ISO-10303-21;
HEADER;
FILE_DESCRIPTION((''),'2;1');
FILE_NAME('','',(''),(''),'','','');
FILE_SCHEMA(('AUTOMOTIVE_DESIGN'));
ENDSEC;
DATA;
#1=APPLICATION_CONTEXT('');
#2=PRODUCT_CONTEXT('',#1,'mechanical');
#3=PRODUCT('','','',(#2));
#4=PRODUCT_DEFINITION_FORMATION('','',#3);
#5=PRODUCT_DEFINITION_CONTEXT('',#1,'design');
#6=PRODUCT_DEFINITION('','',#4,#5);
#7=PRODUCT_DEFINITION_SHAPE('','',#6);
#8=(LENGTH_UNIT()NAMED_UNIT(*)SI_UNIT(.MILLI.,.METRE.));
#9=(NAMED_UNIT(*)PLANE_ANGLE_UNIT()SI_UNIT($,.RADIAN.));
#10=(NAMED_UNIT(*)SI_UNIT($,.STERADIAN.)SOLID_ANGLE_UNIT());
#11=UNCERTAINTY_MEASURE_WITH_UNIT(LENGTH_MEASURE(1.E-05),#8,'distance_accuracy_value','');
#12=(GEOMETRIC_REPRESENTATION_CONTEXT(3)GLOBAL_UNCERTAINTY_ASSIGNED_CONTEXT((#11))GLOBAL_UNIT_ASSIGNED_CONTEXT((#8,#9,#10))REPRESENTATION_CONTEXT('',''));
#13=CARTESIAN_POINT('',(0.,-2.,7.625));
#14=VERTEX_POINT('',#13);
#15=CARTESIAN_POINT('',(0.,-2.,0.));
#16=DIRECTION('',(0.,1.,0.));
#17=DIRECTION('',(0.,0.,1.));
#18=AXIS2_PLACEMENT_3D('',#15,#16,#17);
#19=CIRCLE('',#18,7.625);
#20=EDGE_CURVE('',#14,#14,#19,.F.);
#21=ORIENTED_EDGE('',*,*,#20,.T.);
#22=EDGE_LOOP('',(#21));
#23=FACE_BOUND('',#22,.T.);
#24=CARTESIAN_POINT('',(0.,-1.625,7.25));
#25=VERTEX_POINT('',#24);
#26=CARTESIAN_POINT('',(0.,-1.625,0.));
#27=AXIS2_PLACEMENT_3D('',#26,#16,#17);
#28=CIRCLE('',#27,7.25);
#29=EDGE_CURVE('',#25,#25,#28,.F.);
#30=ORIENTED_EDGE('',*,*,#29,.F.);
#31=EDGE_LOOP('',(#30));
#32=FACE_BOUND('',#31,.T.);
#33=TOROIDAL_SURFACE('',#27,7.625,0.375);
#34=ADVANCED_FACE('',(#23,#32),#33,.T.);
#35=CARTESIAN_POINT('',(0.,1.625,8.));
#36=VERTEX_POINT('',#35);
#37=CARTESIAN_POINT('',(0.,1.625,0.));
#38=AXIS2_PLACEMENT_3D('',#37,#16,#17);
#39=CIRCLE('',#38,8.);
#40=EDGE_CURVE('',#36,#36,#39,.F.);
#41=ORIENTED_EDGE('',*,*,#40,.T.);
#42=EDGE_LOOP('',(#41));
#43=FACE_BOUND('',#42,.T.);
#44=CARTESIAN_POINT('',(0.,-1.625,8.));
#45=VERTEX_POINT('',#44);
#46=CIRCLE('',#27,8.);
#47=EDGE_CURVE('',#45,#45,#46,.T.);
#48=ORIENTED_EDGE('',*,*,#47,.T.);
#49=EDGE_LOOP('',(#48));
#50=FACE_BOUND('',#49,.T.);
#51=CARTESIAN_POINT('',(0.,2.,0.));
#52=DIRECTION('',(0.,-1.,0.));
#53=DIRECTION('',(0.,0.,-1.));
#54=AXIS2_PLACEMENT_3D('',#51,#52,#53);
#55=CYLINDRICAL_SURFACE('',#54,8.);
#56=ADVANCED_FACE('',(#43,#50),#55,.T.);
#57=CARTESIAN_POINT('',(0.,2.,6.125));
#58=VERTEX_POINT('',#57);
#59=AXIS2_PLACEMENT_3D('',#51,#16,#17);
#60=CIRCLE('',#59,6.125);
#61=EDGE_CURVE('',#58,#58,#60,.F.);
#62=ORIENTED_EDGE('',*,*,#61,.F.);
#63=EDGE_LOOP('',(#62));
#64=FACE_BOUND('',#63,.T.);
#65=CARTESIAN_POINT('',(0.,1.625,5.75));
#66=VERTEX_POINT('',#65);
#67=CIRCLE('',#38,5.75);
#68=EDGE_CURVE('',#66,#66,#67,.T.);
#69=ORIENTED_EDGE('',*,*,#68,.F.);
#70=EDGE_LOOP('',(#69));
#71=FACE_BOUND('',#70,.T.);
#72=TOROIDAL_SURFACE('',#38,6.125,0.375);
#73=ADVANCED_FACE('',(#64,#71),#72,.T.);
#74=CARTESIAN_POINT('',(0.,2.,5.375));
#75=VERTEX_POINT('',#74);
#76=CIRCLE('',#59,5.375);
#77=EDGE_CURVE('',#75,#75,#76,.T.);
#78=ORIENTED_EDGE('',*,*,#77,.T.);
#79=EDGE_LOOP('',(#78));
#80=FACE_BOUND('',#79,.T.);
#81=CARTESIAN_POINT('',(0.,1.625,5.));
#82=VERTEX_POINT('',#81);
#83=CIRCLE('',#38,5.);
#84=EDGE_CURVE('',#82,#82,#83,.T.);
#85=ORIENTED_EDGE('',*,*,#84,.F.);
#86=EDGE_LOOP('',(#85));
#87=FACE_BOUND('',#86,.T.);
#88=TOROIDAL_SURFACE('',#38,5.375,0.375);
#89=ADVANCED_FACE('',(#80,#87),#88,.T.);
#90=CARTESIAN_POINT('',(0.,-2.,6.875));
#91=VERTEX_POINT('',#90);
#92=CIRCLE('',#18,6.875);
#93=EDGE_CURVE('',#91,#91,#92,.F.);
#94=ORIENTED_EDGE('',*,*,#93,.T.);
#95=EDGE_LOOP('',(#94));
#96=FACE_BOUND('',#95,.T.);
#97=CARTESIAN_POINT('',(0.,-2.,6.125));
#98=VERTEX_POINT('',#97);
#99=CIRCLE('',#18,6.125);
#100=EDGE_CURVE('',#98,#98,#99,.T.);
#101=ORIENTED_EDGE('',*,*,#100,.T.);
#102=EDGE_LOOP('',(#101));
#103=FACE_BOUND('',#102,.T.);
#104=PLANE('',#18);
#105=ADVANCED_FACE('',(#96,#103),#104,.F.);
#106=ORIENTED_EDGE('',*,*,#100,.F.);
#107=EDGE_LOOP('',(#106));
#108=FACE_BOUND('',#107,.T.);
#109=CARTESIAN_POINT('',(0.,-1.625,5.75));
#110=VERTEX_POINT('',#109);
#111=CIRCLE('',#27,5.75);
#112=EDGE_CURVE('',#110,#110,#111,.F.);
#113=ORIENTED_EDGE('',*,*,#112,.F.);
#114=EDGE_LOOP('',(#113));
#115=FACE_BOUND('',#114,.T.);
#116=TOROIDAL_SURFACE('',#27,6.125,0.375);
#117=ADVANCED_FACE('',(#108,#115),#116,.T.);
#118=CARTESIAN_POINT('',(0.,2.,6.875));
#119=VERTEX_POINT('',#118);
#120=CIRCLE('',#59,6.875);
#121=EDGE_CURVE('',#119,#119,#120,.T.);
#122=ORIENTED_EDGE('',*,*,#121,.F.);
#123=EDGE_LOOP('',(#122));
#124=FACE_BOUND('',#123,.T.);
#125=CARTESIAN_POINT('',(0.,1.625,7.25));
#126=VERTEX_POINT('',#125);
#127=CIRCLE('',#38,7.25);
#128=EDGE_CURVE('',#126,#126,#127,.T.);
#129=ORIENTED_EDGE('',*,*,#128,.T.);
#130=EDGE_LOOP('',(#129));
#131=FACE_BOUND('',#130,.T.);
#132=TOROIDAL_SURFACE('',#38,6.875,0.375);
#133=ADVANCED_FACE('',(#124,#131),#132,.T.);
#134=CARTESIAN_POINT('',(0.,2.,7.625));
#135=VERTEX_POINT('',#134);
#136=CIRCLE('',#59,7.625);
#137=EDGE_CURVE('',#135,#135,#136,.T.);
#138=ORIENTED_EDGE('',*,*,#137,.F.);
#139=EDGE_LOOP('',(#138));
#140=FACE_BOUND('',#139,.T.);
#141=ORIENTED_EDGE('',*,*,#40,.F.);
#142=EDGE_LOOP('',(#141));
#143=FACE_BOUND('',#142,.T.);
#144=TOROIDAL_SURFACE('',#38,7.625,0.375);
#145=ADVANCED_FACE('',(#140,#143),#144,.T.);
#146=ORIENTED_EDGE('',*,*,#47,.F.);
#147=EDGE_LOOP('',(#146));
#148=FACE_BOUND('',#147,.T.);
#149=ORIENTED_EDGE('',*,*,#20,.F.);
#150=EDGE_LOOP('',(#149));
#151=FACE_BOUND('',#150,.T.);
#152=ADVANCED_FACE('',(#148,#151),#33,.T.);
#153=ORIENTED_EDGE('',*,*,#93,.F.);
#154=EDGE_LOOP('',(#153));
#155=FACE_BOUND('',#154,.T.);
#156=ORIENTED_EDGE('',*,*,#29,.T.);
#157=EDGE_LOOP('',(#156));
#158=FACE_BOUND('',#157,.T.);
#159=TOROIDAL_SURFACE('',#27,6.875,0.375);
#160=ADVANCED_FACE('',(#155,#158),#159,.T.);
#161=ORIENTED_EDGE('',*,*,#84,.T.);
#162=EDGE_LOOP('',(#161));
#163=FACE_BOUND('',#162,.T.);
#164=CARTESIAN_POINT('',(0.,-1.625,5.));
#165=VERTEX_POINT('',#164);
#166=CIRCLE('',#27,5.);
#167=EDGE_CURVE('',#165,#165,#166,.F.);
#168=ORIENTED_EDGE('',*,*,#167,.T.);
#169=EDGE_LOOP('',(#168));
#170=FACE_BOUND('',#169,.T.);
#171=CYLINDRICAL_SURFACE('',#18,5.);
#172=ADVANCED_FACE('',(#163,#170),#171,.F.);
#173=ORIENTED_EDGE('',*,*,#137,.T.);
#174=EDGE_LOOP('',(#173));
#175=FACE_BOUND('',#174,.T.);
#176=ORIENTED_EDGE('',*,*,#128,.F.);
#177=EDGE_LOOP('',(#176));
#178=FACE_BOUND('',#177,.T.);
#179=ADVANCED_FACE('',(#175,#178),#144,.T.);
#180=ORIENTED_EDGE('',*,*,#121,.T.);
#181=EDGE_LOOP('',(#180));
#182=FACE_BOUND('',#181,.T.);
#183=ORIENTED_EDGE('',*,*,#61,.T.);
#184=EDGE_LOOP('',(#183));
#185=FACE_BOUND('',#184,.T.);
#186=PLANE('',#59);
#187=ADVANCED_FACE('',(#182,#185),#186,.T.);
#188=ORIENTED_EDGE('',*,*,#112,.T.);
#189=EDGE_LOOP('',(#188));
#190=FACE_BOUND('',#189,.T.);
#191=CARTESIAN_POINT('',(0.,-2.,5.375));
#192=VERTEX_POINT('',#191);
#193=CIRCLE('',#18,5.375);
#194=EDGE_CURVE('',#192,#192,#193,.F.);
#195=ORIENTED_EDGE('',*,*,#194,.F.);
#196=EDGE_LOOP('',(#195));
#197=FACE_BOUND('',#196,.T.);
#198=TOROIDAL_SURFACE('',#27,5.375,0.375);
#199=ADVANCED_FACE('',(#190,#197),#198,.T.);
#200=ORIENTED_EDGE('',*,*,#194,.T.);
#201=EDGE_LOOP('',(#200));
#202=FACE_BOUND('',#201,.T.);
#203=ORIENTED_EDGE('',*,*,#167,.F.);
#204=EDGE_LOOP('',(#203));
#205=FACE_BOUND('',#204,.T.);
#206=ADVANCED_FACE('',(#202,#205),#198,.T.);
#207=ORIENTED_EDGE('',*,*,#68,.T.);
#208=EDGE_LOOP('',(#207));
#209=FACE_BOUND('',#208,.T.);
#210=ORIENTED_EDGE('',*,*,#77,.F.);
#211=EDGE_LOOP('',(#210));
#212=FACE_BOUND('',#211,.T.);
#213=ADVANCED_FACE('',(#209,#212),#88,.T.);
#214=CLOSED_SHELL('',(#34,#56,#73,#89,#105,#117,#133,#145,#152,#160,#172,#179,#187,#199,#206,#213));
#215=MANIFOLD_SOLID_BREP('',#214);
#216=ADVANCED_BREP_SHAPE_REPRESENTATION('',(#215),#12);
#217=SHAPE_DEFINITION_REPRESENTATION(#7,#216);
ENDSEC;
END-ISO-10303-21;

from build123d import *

# Parameters (mm, degrees)
SKETCH1_R                = 8
BOSS_EXTRUDE1_DEPTH      = 2
FILLET1_R                = 0.375
CUT_EXTRUDE1_DEPTH       = 12.489125432
CUT_EXTRUDE1_DEPTH_BACK  = 12.489125432
SKETCH2_R                = 7.25
FILLET2_R                = 0.375
BOSS_EXTRUDE2_DEPTH      = 2
BOSS_EXTRUDE2_DEPTH_BACK = 2
SKETCH3_R                = 7.25
FILLET3_R                = 0.375
CUT_EXTRUDE2_DEPTH       = 12.489125432
CUT_EXTRUDE2_DEPTH_BACK  = 12.489125432
SKETCH4_R                = 5.75
FILLET4_R                = 0.375
BOSS_EXTRUDE3_DEPTH      = 2
BOSS_EXTRUDE3_DEPTH_BACK = 2
SKETCH5_R                = 5.75
FILLET5_R                = 0.375
CUT_EXTRUDE3_DEPTH       = 12.489125432
CUT_EXTRUDE3_DEPTH_BACK  = 12.489125432
SKETCH6_R                = 5
FILLET6_R                = 0.375


# Some blends are built 0.0001 mm under size
with BuildPart() as part:
    # Sketch1 → Boss-Extrude1 (new, symmetric)
    with BuildSketch(Plane(origin=(0, 0, 0), x_dir=(1, 0, 0), z_dir=(0, 1, 0))):
        with Locations(Location((0, 0, 0), (0, 0, 270))):
            Circle(SKETCH1_R)
    extrude(amount=BOSS_EXTRUDE1_DEPTH, both=True)

    # Fillet1
    fillet1_edges = [part.edges().sort_by_distance(p)[0] for p in [
        (0, -2, -8),
        (0, 2, -8),
    ]]
    fillet(fillet1_edges, radius=FILLET1_R)

    # Sketch2 → Cut-Extrude1 (cut, two sides: drawn at the far end of the back side and taken through both)
    with BuildSketch(Plane(origin=(0, 0, 0), x_dir=(1, 0, 0), z_dir=(0, 1, 0)).offset(-CUT_EXTRUDE1_DEPTH_BACK)):
        with Locations(Location((0, 0, 0), (0, 0, 270))):
            Circle(SKETCH2_R)
    extrude(amount=CUT_EXTRUDE1_DEPTH + CUT_EXTRUDE1_DEPTH_BACK, mode=Mode.SUBTRACT)

    # Fillet2
    fillet2_edges = [part.edges().sort_by_distance(p)[0] for p in [
        (0, -2, -7.25),
        (0, 2, -7.25),
    ]]
    fillet(fillet2_edges, radius=FILLET2_R - 0.0001)  # a hair under: the kernel refuses the full size

    # Sketch3 → Boss-Extrude2 (add, two sides: drawn at the far end of the back side and taken through both)
    with BuildSketch(Plane(origin=(0, 0, 0), x_dir=(1, 0, 0), z_dir=(0, 1, 0)).offset(-BOSS_EXTRUDE2_DEPTH_BACK)):
        with Locations(Location((0, 0, 0), (0, 0, 270))):
            Circle(SKETCH3_R)
    extrude(amount=BOSS_EXTRUDE2_DEPTH + BOSS_EXTRUDE2_DEPTH_BACK)

    # Fillet3
    # the kernel refuses this fillet: 0.375 mm, written as the material it takes off along each edge
    with BuildSketch(Plane(origin=(0, -2, 0), x_dir=(0, 0, 1), z_dir=(-1, 0, 0))) as fillet3_piece_1:
        with BuildLine():
            CenterArc((6.875000013, 0.375), FILLET3_R, 270, 89.984721125)
            Line((6.875000013, 0), (7.25, 0))
            Line((7.25, 0), (7.25, 0.3749))
        make_face()
    revolve(axis=Axis((0, -2, 0), (0, 1, 0)), mode=Mode.SUBTRACT)
    with BuildSketch(Plane(origin=(0, 2, 0), x_dir=(0, 0, 1), z_dir=(-1, 0, 0))) as fillet3_piece_2:
        with BuildLine():
            CenterArc((6.875000013, -0.375), FILLET3_R, 0.015278875, 89.984721125)
            Line((6.875000013, 0), (7.25, 0))
            Line((7.25, 0), (7.25, -0.3749))
        make_face()
    revolve(axis=Axis((0, 2, 0), (0, 1, 0)), mode=Mode.SUBTRACT)

    # Sketch4 → Cut-Extrude2 (cut, two sides: drawn at the far end of the back side and taken through both)
    with BuildSketch(Plane(origin=(0, 0, 0), x_dir=(1, 0, 0), z_dir=(0, 1, 0)).offset(-CUT_EXTRUDE2_DEPTH_BACK)):
        with Locations(Location((0, 0, 0), (0, 0, 270))):
            Circle(SKETCH4_R)
    extrude(amount=CUT_EXTRUDE2_DEPTH + CUT_EXTRUDE2_DEPTH_BACK, mode=Mode.SUBTRACT)

    # Fillet4
    fillet4_edges = [part.edges().sort_by_distance(p)[0] for p in [
        (0, -2, -5.75),
        (0, 2, -5.75),
    ]]
    fillet(fillet4_edges, radius=FILLET4_R)

    # Sketch5 → Boss-Extrude3 (add, two sides: drawn at the far end of the back side and taken through both)
    with BuildSketch(Plane(origin=(0, 0, 0), x_dir=(1, 0, 0), z_dir=(0, 1, 0)).offset(-BOSS_EXTRUDE3_DEPTH_BACK)):
        with Locations(Location((0, 0, 0), (0, 0, 270))):
            Circle(SKETCH5_R)
    extrude(amount=BOSS_EXTRUDE3_DEPTH + BOSS_EXTRUDE3_DEPTH_BACK)

    # Fillet5
    fillet5_edges = [part.edges().sort_by_distance(p)[0] for p in [
        (0, -2, -5.75),
        (0, 2, -5.75),
    ]]
    fillet(fillet5_edges, radius=FILLET5_R - 0.0001)  # a hair under: the kernel refuses the full size

    # Sketch6 → Cut-Extrude3 (cut, two sides: drawn at the far end of the back side and taken through both)
    with BuildSketch(Plane(origin=(0, 0, 0), x_dir=(1, 0, 0), z_dir=(0, 1, 0)).offset(-CUT_EXTRUDE3_DEPTH_BACK)):
        with Locations(Location((0, 0, 0), (0, 0, 270))):
            Circle(SKETCH6_R)
    extrude(amount=CUT_EXTRUDE3_DEPTH + CUT_EXTRUDE3_DEPTH_BACK, mode=Mode.SUBTRACT)

    # Fillet6
    fillet6_edges = [part.edges().sort_by_distance(p)[0] for p in [
        (0, -2, -5),
        (0, 2, -5),
    ]]
    fillet(fillet6_edges, radius=FILLET6_R)


solid = part.part
